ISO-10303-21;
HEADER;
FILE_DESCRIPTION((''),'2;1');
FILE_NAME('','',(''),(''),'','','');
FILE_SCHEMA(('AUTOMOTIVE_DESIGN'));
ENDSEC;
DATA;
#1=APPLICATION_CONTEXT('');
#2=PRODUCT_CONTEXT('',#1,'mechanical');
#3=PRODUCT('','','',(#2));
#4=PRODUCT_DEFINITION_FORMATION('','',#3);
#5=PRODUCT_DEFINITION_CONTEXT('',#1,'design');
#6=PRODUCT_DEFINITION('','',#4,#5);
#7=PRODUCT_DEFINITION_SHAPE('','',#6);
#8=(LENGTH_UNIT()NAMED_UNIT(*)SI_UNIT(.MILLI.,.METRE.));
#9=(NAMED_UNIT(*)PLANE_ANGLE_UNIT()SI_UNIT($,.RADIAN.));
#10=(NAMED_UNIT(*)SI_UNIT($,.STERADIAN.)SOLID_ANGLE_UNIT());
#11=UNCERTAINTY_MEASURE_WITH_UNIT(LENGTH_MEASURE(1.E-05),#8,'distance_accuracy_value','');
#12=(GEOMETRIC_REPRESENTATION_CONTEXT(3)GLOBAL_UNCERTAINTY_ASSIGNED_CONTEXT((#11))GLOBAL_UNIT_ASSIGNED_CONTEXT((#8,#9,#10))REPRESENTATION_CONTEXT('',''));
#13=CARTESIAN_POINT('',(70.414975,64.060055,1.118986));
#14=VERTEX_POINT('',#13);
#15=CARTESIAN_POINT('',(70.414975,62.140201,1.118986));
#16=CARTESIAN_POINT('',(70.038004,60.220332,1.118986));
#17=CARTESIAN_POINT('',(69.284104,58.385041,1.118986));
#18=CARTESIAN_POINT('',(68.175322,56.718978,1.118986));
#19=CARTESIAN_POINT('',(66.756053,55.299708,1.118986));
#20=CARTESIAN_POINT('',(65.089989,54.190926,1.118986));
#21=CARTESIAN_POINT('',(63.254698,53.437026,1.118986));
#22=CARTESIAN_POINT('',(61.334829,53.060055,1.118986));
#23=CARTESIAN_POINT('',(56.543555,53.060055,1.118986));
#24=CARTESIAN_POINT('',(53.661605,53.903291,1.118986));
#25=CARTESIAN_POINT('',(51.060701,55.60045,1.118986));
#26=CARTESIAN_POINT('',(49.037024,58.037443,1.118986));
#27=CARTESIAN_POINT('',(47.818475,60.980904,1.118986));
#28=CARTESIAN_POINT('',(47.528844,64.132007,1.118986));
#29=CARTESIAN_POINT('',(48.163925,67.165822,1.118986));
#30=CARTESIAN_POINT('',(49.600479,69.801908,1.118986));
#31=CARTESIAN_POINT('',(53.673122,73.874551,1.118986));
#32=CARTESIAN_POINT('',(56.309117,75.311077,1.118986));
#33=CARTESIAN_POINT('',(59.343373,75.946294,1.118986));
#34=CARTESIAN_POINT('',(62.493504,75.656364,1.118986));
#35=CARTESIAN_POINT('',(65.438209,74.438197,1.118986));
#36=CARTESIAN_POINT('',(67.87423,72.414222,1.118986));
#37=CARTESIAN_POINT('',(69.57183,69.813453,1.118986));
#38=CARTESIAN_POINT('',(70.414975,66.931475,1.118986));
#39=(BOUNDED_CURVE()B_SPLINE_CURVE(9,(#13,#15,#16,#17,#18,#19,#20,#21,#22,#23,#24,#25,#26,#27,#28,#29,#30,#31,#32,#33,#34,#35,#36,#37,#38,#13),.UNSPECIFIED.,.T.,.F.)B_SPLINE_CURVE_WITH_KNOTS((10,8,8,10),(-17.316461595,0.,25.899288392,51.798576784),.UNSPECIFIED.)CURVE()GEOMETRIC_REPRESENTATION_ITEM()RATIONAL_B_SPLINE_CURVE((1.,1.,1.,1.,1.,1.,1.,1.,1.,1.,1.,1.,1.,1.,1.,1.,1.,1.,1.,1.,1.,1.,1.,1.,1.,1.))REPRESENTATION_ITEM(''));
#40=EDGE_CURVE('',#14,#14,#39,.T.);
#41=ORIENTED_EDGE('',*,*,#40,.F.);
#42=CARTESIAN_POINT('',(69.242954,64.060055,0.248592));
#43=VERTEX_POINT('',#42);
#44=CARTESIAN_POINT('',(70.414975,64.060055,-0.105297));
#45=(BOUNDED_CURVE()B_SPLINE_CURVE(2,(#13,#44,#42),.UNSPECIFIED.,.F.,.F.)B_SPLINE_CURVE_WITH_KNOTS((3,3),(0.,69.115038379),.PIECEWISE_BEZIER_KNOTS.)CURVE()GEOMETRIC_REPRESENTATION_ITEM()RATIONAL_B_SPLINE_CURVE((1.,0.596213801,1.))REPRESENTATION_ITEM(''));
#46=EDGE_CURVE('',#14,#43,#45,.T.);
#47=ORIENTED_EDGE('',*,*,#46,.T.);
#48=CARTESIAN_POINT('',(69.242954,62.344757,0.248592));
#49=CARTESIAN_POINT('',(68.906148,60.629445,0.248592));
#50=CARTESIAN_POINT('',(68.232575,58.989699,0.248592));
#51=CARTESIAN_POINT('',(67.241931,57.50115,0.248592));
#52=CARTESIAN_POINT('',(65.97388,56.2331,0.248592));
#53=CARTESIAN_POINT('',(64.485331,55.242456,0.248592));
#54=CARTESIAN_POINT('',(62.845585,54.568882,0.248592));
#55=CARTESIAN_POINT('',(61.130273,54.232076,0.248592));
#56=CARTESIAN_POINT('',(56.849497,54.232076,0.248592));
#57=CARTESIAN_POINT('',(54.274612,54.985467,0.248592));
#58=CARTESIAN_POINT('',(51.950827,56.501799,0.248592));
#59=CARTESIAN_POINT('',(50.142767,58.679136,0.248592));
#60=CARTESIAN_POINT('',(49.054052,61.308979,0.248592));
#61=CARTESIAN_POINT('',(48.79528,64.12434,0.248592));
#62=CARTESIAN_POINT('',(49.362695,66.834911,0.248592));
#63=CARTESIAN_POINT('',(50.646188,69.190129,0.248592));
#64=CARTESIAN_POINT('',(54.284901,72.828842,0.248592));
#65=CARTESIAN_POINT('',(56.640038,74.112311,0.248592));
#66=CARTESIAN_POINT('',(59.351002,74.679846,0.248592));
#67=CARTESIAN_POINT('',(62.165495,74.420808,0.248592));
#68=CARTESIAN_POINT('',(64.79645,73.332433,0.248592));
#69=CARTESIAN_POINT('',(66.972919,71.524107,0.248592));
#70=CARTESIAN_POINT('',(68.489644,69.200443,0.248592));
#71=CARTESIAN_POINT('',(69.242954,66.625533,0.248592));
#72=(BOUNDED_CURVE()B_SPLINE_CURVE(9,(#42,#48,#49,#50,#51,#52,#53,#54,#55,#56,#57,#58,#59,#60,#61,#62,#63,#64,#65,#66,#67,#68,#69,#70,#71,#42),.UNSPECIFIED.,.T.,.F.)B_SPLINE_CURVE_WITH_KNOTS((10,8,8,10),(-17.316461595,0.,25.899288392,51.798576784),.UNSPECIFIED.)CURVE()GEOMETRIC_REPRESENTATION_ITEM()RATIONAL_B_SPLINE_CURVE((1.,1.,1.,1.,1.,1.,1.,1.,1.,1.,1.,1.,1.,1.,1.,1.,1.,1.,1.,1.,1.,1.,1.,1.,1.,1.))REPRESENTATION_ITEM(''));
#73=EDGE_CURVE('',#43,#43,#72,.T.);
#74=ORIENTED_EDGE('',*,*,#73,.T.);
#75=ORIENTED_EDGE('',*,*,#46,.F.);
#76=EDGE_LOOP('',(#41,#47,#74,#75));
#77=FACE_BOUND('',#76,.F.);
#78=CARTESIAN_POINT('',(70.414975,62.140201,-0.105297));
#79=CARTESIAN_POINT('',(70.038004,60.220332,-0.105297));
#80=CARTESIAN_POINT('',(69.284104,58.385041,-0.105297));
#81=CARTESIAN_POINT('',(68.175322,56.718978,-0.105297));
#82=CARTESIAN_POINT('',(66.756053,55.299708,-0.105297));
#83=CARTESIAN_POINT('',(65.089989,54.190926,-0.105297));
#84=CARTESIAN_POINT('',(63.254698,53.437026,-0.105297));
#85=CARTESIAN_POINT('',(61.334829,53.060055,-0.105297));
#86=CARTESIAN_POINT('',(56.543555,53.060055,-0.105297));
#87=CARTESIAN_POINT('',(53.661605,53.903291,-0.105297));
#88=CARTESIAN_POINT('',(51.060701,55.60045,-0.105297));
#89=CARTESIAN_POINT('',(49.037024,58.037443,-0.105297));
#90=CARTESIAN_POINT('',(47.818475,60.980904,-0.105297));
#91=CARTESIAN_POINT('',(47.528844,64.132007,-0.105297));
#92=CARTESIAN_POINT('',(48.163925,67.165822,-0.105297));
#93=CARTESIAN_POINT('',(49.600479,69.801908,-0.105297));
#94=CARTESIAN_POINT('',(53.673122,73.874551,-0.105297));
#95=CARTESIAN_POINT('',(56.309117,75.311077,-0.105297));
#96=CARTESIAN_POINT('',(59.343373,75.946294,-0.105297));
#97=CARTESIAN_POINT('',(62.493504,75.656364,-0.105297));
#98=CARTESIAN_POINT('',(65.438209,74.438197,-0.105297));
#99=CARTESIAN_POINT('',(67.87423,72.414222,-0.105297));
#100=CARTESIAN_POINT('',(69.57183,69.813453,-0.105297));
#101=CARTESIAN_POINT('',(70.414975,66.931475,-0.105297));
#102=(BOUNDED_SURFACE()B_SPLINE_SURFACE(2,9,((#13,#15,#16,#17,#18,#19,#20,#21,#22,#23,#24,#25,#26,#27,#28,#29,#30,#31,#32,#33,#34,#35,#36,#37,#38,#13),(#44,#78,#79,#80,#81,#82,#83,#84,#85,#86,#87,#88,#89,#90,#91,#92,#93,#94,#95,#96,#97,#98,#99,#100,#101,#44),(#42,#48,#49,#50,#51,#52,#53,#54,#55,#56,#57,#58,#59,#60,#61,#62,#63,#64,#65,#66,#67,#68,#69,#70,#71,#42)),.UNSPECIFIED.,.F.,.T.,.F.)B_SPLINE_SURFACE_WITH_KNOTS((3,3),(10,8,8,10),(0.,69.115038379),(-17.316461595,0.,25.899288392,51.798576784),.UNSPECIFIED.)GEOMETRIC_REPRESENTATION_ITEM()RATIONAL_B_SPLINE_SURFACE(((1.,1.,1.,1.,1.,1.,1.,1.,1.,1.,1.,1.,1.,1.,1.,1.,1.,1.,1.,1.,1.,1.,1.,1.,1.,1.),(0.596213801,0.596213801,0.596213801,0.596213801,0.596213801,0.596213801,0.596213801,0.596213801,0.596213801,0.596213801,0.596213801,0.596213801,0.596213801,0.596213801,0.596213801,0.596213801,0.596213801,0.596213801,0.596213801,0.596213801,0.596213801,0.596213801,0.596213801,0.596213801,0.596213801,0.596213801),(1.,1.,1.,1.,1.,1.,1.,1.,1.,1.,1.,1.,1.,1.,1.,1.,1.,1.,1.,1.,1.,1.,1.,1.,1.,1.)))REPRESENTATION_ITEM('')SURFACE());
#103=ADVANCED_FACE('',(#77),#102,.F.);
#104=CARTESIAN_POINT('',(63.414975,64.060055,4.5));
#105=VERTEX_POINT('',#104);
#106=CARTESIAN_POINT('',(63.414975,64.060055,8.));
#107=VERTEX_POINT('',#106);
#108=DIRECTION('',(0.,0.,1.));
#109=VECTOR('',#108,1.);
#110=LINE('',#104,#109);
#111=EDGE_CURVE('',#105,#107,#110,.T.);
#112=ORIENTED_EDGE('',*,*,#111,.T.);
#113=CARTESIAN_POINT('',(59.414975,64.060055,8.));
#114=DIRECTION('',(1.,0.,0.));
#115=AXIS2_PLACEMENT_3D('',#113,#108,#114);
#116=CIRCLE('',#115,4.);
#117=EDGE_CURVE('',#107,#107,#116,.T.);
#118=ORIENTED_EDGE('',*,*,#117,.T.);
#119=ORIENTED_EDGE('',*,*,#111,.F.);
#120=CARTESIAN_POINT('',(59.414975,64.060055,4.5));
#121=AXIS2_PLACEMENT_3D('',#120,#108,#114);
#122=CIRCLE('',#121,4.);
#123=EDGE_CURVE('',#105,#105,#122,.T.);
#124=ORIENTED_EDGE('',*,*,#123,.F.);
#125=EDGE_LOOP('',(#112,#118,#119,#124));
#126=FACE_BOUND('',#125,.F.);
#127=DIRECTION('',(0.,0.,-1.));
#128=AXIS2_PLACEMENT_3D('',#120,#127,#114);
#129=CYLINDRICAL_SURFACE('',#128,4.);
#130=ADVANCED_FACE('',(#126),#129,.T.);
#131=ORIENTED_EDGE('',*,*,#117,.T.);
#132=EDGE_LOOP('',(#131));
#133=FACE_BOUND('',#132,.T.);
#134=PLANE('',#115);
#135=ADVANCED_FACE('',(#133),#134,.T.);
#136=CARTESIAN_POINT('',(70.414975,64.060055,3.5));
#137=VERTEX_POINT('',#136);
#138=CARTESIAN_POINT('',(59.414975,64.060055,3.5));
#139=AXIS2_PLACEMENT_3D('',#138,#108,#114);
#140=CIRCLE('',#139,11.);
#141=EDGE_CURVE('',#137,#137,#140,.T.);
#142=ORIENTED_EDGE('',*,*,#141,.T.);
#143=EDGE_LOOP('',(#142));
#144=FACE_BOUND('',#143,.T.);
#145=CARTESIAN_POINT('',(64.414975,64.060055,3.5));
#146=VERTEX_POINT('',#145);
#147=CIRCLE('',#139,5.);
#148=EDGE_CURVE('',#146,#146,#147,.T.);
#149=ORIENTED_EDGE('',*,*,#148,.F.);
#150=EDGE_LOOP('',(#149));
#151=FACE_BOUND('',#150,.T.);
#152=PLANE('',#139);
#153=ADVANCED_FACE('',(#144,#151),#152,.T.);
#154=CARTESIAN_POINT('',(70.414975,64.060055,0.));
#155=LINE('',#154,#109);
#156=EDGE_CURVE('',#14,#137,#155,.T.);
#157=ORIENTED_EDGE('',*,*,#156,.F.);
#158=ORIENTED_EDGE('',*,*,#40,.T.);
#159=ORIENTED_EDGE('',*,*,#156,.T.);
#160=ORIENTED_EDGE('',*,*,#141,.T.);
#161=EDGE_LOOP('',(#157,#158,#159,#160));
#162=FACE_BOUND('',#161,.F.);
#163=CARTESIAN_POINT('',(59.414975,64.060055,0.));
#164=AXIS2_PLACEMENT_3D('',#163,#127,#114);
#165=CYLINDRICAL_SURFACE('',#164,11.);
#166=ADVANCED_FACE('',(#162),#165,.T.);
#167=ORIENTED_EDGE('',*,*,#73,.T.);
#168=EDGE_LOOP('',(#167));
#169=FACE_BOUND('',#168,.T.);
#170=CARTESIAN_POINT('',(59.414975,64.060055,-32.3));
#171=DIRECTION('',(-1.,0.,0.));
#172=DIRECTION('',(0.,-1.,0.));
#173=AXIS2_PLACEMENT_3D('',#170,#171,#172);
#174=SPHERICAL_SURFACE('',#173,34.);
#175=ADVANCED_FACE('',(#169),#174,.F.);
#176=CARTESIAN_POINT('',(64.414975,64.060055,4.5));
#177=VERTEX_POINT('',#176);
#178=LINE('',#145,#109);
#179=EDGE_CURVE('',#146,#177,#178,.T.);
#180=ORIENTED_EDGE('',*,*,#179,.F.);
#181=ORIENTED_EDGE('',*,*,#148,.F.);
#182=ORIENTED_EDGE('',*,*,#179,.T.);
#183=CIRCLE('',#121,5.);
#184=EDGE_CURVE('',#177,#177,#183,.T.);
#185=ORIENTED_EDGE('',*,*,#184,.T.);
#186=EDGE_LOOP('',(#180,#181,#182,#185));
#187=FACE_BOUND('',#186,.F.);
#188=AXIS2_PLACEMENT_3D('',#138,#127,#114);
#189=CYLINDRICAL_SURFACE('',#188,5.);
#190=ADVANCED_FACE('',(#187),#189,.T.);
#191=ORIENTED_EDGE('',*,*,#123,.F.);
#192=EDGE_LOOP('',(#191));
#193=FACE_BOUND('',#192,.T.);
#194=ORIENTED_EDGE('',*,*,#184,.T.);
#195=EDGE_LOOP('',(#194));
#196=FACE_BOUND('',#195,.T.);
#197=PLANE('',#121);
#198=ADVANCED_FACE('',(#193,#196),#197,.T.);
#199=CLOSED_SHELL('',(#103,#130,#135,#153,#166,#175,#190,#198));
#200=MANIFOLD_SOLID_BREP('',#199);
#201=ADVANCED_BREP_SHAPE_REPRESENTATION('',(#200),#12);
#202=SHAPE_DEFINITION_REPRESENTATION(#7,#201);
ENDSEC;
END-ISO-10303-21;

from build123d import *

# Parameters (mm, degrees)
F0_R     = 11
F1_DEPTH = 3.5
F2_R     = 5
F3_DEPTH = 1
F4_R     = 4
F5_DEPTH = 3.5
F6_R     = 1.3518679975
F7_DEPTH = 32.3
F11_R    = 0.9092071391


# Not quite as in the source:
# - a fillet or chamfer that OpenCascade refuses, or shapes differently, is made with other operations: its cross-section is extruded or revolved along the edge and cut away or added
# - a feature names something its author has since deleted; it is built from what else it names


with BuildPart() as f1:
    # F0 (on Top) → F1 (new body)
    with BuildSketch(Plane.XY):
        with Locations((59.4149753451, 64.0600547194)):
            Circle(F0_R)
    extrude(amount=F1_DEPTH)

    # F2 (on face) → F3 (join)
    with BuildSketch(Plane.XY.offset(3.5)):
        with Locations((59.4149753451, 64.0600547194)):
            Circle(F2_R)
    extrude(amount=F3_DEPTH)

    # F4 (on face) → F5 (join)
    with BuildSketch(Plane.XY.offset(4.5)):
        with Locations((59.4149753451, 64.0600547194)):
            Circle(F4_R)
    extrude(amount=F5_DEPTH)

    # F6 (on face) → F7 (join)
    with BuildSketch(Plane(origin=(0, 0, 0), x_dir=(1, 0, 0), z_dir=(0, 0, -1))):
        with Locations((59.4149753451, -64.0600547194)):
            Circle(F6_R)
    extrude(amount=F7_DEPTH)

    # F8 (on face) → F9 (revolve, cut)
    with BuildSketch(Plane(origin=(0, 0, -32.3), x_dir=(1, 0, 0), z_dir=(0, 0, -1))):
        with BuildLine():
            Line((60.7668433426, -64.0600547194), (93.4149753451, -64.0600547194))
            ThreePointArc((93.4149753451, -64.0600547194), (59.4149753451, -30.0600547194), (25.4149753451, -64.0600547194))
            Line((25.4149753451, -64.0600547194), (58.0631073476, -64.0600547194))
            ThreePointArc((58.0631073476, -64.0600547194), (59.4149753451, -62.7081867219), (60.7668433426, -64.0600547194))
        make_face()
        with BuildLine():
            Line((59.4149753451, -64.0600547194), (60.7668433426, -64.0600547194))
            ThreePointArc((60.7668433426, -64.0600547194), (59.4149753451, -62.7081867219), (58.0631073476, -64.0600547194))
            Line((58.0631073476, -64.0600547194), (59.4149753451, -64.0600547194))
        make_face()
    revolve(axis=Axis((76.4149753451, 64.0600547194, -32.3), (1, 0, 0)), mode=Mode.SUBTRACT)

    # F10: fillet of radius 5 on 1 edges, made by hand

    # F10_s1 → F10_t2 (revolve, cut)
    with BuildSketch(Plane.YZ.offset(59.4149753451)):
        with BuildLine():
            ThreePointArc((52.67102491, 0), (53.4091792265, 0.0547873448), (54.1311569369, 0.2179487179))
            ThreePointArc((54.1311569369, 0.2179487179), (53.7867795374, 0.1107978463), (53.4435581222, 0))
            Line((53.4435581222, 0), (52.67102491, 0))
        make_face()
    revolve(axis=Axis((59.4149753451, 64.0600547194, 0), (0, 0, 1)), mode=Mode.SUBTRACT)

    # F11
    f11_edges = [f1.edges().sort_by_distance(p)[0] for p in [
        (51.636801, 71.838229, 0.015157),
        (67.19315, 56.28188, 0.015157),
    ]]
    fillet(f11_edges, radius=F11_R)


solid = f1.part
